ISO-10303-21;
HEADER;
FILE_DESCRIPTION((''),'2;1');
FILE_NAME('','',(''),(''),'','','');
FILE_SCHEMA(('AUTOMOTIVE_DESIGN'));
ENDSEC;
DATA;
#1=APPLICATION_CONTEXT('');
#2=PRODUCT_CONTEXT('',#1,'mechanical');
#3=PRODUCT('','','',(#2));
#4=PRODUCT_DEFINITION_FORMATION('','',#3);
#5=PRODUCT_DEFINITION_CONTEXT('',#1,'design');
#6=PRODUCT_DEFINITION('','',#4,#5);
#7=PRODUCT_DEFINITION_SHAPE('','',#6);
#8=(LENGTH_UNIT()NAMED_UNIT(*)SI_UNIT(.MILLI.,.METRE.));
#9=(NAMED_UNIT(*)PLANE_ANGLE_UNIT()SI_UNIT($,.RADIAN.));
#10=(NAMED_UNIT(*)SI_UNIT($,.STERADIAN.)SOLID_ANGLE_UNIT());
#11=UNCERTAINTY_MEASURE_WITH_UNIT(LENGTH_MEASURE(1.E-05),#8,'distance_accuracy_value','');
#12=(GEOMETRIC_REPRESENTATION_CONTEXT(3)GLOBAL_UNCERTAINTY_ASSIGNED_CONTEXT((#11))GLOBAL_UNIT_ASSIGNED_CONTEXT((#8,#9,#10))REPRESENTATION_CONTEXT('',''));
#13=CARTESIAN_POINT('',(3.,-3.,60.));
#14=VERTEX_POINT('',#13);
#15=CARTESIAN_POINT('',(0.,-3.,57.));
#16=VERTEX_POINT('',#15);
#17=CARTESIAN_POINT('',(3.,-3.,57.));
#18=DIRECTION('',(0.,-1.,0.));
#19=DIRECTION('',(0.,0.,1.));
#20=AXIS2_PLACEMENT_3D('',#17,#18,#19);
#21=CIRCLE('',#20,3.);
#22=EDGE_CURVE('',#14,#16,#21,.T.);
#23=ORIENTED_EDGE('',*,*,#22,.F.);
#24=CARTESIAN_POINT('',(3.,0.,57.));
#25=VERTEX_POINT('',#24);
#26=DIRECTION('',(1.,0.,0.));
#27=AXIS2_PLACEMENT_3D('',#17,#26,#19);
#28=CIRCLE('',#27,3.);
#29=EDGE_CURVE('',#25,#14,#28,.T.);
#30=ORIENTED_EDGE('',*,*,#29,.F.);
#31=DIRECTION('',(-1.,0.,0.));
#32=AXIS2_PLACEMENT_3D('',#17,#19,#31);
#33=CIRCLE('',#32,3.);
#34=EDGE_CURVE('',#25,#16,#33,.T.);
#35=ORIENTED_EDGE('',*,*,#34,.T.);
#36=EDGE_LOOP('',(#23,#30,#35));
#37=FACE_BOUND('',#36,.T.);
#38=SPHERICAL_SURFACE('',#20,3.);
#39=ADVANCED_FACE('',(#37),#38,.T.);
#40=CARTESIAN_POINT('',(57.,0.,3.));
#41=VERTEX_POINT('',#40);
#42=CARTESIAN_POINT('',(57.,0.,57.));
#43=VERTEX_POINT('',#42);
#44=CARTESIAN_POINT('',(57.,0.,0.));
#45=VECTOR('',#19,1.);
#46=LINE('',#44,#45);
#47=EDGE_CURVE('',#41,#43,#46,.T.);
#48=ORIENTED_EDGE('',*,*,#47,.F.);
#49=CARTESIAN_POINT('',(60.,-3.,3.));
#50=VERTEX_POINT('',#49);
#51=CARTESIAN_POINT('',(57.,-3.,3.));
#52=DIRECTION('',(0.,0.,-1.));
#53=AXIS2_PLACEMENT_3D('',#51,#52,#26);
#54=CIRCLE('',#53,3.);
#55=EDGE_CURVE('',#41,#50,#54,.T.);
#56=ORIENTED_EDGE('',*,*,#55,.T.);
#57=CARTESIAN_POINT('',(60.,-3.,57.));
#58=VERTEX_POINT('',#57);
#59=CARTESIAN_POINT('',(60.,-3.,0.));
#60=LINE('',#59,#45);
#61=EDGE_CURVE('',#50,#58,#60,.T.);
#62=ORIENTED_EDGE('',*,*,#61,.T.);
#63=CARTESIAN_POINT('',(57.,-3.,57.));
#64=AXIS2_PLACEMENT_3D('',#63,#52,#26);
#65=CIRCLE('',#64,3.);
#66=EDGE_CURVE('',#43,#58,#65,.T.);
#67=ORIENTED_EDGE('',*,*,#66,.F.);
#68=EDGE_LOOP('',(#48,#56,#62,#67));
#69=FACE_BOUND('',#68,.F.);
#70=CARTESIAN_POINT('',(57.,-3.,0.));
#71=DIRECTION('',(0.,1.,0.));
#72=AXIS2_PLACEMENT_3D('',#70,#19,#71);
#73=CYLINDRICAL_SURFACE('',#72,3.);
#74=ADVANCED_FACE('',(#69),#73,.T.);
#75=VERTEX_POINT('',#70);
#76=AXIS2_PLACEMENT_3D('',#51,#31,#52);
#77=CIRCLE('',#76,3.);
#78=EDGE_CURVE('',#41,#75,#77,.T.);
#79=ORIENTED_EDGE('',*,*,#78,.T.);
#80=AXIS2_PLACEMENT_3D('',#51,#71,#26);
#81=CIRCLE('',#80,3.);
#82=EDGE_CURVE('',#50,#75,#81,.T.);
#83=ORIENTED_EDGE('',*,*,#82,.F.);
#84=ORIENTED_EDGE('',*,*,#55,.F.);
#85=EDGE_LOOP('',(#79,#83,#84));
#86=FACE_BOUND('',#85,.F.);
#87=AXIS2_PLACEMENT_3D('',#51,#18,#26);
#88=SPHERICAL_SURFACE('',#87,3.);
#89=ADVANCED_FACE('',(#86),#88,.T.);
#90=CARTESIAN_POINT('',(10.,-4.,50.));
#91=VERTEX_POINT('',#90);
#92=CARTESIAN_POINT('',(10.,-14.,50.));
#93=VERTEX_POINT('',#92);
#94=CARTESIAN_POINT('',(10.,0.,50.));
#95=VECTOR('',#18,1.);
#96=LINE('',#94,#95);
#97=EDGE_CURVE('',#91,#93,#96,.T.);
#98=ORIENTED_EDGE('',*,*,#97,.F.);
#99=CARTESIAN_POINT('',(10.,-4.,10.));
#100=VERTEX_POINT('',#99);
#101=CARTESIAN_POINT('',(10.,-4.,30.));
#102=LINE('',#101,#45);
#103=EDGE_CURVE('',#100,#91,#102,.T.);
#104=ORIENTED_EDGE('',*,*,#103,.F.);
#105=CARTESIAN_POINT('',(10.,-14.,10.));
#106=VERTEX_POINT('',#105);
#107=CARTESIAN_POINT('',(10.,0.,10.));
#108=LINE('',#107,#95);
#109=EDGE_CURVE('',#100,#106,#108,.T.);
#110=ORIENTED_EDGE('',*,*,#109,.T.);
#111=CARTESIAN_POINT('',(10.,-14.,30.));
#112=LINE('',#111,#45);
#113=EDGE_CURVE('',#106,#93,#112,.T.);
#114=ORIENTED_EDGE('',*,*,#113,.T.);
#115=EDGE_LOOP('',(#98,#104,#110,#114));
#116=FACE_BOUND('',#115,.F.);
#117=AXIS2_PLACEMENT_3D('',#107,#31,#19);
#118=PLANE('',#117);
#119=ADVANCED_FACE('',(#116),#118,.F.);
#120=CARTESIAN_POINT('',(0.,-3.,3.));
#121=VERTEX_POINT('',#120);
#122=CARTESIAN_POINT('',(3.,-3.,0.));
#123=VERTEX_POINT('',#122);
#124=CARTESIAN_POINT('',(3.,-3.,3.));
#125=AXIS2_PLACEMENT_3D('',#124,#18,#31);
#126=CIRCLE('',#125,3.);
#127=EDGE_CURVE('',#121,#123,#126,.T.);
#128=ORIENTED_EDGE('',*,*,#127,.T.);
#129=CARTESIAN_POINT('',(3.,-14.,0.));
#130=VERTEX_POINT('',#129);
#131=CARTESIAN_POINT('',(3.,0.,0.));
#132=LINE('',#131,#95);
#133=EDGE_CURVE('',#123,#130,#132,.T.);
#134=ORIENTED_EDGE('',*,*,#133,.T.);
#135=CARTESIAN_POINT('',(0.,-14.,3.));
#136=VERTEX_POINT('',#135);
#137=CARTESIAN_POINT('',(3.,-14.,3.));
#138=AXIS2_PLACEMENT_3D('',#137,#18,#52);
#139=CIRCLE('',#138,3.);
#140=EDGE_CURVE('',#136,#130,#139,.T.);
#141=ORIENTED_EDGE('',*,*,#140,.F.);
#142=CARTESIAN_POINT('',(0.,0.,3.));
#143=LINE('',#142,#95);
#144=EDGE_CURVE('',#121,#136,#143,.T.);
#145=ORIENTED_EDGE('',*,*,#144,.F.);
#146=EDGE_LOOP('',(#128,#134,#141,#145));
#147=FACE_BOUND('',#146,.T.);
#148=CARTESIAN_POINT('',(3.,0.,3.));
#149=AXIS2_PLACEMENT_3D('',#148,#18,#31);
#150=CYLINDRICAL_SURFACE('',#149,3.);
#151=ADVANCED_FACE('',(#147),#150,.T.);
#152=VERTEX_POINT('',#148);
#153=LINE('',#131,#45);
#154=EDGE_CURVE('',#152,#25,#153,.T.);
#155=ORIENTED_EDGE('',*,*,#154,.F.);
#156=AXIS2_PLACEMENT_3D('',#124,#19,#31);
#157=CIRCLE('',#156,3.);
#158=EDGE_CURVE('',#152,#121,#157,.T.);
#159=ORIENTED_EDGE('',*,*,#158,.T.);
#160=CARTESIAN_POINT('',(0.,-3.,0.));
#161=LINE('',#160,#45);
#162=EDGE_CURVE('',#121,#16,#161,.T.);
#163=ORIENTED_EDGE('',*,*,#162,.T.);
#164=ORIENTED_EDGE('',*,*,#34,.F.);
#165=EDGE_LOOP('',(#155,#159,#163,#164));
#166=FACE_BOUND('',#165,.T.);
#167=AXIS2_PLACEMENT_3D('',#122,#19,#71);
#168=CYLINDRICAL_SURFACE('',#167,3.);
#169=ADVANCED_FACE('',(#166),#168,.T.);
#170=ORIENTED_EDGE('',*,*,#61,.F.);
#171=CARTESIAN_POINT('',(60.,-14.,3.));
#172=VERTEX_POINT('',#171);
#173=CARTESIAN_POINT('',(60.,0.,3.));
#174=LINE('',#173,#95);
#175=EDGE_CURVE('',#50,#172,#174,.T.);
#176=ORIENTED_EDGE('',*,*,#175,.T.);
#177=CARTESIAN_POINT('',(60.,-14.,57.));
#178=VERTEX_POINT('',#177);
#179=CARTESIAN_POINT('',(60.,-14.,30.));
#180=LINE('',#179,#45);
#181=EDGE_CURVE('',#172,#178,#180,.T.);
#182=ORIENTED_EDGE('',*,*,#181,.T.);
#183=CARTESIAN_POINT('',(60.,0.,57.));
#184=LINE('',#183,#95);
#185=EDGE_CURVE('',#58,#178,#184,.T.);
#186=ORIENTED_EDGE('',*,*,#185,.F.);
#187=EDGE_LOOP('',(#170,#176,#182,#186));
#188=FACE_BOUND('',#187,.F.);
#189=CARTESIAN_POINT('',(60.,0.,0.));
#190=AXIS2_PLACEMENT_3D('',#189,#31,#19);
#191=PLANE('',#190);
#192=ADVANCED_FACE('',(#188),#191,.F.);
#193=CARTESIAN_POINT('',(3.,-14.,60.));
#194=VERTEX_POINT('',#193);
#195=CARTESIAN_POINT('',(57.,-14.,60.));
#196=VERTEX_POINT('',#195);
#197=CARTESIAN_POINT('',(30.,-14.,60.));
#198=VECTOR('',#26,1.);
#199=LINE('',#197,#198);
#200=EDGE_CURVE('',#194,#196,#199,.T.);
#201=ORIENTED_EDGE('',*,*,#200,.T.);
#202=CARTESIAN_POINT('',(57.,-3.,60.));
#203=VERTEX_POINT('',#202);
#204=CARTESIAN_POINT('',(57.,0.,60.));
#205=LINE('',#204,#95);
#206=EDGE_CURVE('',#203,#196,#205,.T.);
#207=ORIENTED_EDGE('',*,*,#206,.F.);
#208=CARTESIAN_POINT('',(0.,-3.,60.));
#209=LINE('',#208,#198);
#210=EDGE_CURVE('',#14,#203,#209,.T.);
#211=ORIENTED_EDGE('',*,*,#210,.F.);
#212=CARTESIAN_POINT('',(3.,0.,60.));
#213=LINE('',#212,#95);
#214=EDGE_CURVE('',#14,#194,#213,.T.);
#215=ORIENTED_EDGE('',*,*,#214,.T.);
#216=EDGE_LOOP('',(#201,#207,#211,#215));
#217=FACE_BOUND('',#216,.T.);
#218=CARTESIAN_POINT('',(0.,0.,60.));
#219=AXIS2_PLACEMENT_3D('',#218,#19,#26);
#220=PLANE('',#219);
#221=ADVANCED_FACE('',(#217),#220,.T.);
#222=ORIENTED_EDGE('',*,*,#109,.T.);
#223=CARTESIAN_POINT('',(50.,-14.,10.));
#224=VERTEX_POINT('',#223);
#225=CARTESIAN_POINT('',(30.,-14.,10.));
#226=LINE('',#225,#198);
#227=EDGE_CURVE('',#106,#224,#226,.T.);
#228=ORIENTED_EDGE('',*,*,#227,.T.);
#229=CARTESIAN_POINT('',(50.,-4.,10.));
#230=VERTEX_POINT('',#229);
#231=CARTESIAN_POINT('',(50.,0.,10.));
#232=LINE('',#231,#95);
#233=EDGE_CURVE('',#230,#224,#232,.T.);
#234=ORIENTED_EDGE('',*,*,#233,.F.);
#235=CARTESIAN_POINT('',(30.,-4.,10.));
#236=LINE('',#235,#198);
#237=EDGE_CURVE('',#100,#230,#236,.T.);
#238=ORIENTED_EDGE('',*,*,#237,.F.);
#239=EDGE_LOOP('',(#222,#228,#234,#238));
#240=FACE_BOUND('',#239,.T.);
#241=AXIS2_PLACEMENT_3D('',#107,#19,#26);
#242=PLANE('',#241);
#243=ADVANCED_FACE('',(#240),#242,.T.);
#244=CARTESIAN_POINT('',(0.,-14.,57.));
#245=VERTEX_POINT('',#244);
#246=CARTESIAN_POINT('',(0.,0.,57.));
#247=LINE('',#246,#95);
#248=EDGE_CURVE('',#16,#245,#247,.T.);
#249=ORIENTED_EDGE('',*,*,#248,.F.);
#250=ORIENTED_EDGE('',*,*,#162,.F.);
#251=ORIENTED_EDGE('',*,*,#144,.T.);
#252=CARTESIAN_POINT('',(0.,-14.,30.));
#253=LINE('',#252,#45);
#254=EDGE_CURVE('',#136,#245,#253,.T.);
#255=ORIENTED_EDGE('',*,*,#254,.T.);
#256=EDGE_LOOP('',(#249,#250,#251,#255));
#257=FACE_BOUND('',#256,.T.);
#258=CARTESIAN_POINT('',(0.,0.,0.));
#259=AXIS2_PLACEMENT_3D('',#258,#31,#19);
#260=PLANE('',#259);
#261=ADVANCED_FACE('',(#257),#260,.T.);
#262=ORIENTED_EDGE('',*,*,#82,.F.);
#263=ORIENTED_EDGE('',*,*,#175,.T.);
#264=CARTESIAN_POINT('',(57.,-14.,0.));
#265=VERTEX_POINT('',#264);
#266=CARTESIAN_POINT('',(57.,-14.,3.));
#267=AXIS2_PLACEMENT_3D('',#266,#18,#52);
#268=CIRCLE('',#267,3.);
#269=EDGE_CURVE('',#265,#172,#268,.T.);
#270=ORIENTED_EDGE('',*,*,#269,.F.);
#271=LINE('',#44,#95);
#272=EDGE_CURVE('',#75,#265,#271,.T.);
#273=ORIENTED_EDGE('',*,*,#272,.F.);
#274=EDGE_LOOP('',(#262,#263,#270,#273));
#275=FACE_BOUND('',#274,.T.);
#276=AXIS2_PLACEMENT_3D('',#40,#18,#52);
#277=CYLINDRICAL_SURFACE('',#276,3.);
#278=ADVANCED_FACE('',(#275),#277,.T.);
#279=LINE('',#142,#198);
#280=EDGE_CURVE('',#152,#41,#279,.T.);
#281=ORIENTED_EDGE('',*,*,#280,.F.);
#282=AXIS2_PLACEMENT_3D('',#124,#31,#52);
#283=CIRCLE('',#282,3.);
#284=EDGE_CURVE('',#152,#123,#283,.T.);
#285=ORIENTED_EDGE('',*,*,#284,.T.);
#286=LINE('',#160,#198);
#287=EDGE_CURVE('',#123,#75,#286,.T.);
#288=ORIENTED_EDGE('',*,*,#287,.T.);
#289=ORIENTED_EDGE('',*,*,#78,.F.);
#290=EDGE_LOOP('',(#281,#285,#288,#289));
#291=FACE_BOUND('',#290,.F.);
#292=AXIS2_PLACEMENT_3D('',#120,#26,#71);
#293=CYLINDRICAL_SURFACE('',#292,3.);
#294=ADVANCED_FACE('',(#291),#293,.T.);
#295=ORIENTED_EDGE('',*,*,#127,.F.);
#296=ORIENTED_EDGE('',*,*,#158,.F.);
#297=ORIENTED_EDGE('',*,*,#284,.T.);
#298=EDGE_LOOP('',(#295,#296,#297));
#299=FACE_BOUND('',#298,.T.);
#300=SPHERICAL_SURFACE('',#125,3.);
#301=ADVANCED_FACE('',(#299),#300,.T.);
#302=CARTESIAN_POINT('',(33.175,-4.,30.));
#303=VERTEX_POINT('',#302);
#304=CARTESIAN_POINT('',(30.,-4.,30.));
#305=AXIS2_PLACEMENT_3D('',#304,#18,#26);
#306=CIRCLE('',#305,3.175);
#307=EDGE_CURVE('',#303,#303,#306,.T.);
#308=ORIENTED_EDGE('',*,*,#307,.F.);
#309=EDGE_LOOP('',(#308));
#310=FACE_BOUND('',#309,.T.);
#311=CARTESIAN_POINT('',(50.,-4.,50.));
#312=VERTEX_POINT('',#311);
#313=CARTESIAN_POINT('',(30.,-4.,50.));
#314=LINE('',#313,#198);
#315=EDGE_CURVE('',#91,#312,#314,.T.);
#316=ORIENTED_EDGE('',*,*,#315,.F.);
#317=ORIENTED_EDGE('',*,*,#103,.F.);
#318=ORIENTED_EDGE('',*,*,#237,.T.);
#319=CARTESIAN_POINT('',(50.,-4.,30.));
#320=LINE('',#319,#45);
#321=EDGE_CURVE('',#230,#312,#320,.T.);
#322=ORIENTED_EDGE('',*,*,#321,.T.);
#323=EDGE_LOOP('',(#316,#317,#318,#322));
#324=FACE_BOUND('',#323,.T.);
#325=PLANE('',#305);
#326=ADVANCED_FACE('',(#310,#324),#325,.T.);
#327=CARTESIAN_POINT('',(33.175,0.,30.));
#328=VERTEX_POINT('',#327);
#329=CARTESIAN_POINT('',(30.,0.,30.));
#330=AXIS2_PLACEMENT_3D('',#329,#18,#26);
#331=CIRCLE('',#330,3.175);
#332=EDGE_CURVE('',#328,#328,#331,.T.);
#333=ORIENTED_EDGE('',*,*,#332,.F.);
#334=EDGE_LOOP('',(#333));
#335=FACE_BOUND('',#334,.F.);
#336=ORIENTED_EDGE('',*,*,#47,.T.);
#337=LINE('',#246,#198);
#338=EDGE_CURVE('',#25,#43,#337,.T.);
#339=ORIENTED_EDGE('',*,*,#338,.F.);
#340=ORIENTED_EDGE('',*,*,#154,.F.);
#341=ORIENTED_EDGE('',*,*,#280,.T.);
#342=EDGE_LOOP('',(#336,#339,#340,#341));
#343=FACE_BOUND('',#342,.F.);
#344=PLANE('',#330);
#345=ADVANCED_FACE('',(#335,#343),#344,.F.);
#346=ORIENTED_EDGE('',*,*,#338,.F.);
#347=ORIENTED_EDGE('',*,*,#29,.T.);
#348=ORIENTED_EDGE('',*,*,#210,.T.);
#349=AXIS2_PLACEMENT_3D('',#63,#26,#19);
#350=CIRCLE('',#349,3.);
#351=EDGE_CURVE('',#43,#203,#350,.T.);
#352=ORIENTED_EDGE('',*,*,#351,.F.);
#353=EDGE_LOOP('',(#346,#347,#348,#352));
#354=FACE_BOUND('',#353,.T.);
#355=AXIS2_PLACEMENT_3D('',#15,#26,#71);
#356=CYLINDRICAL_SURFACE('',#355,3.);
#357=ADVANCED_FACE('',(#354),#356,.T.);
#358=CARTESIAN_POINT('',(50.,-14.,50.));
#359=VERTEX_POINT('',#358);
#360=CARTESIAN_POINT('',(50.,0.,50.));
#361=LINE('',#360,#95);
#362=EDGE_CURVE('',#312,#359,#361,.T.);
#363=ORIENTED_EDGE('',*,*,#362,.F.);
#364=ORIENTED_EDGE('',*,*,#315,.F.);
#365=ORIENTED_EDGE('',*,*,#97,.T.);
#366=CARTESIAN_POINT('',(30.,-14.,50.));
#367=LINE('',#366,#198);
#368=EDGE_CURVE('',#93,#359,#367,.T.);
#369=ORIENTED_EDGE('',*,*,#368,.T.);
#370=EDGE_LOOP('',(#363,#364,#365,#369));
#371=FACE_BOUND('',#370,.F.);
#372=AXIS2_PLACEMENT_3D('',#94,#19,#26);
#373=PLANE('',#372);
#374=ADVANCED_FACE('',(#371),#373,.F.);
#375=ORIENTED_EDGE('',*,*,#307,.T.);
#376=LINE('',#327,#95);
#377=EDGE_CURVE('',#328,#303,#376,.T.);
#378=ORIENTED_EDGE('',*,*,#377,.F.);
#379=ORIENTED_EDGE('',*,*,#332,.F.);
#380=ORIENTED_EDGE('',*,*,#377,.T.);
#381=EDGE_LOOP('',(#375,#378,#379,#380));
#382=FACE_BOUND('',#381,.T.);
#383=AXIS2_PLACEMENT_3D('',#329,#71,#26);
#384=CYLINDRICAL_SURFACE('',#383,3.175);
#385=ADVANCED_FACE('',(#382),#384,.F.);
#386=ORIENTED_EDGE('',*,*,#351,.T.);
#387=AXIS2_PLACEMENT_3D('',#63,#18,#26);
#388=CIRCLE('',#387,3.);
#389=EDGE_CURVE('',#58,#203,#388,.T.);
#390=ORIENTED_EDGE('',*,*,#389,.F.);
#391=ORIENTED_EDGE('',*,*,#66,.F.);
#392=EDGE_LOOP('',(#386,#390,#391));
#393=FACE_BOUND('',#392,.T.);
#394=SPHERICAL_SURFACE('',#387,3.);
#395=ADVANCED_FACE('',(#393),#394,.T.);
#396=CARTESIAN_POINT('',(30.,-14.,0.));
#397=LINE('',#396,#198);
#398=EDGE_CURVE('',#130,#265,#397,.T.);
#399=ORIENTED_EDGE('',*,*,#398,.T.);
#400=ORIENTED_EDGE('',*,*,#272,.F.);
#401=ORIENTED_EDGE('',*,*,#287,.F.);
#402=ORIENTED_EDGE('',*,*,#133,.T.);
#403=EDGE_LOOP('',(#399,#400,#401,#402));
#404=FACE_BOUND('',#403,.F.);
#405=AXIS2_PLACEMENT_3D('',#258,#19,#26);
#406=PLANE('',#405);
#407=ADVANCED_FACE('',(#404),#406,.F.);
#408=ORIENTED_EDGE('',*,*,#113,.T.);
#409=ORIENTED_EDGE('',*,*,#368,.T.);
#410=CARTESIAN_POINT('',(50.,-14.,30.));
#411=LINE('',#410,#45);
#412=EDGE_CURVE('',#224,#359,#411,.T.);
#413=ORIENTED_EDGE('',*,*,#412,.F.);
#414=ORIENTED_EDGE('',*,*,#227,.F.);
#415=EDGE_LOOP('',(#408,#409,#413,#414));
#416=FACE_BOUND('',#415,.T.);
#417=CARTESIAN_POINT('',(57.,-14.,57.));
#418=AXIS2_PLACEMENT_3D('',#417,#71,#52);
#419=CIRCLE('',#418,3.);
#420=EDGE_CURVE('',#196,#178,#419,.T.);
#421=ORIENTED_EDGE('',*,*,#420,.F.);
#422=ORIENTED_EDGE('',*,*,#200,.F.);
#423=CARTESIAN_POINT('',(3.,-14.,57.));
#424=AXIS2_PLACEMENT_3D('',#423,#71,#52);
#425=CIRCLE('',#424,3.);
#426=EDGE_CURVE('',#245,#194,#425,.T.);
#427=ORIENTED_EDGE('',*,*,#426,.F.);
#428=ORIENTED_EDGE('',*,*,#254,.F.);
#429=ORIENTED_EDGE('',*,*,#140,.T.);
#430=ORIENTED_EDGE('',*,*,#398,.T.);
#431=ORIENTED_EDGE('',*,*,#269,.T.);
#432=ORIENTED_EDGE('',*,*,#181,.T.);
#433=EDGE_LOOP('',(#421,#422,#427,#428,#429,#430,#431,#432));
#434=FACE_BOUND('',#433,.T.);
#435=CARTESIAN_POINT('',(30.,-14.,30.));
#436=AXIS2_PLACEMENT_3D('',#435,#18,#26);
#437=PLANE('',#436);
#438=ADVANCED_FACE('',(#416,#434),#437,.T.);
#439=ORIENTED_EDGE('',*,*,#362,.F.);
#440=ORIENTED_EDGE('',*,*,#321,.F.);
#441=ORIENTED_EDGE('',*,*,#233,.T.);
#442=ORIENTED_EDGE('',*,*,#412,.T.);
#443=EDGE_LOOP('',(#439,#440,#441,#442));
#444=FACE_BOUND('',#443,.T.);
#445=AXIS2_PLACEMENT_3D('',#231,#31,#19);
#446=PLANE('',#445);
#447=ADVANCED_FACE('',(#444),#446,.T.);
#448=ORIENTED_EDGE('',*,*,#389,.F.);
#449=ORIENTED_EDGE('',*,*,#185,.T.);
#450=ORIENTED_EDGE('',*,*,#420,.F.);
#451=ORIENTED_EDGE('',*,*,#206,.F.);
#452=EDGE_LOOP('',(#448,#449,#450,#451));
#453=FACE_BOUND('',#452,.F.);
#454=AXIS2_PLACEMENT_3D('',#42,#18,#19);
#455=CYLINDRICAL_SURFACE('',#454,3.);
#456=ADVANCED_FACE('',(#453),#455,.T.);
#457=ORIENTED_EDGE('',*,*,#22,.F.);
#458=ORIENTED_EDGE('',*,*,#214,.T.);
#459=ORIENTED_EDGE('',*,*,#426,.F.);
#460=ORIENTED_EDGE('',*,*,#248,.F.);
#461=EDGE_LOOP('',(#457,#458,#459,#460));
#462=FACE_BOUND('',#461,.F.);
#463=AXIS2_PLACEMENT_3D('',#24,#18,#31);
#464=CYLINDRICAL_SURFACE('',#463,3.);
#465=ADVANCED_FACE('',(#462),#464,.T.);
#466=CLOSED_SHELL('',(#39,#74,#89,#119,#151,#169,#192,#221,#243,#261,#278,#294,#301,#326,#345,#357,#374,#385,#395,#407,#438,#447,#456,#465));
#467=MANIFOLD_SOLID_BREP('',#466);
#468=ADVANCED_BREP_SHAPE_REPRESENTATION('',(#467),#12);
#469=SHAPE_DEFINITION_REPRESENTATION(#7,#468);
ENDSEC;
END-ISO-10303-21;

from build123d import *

# Parameters (mm, degrees)
F0_W     = 60
F0_H     = 60
F0_W_2   = 40
F0_H_2   = 40
F1_DEPTH = 14
F0_R     = 3.175
F2_DEPTH = 4
F3_R     = 3


# Not quite as in the source:
# - a feature names something its author has since deleted; it is built from what else it names


with BuildPart() as f1:
    # F0 (on Front) → F1 (new body)
    with BuildSketch(Plane.XZ):
        with Locations((30, 30)):
            Rectangle(F0_W, F0_H)
        with Locations((30, 30)):
            Rectangle(F0_W_2, F0_H_2, mode=Mode.SUBTRACT)
    extrude(amount=F1_DEPTH)

    # F0 (on Front) → F2 (join)
    with BuildSketch(Plane.XZ):
        with Locations((30, 30)):
            Rectangle(F0_W_2, F0_H_2)
        with Locations((30, 30)):
            Circle(F0_R, mode=Mode.SUBTRACT)
    extrude(amount=F2_DEPTH)

    # F3
    f3_edges = [f1.edges().sort_by_distance(p)[0] for p in [
        (0, -7, 0),
        (0, -7, 60),
        (60, -7, 60),
        (60, -7, 0),
        (60, 0, 30),
        (30, 0, 60),
        (0, 0, 30),
        (30, 0, 0),
    ]]
    fillet(f3_edges, radius=F3_R)


solid = f1.part
